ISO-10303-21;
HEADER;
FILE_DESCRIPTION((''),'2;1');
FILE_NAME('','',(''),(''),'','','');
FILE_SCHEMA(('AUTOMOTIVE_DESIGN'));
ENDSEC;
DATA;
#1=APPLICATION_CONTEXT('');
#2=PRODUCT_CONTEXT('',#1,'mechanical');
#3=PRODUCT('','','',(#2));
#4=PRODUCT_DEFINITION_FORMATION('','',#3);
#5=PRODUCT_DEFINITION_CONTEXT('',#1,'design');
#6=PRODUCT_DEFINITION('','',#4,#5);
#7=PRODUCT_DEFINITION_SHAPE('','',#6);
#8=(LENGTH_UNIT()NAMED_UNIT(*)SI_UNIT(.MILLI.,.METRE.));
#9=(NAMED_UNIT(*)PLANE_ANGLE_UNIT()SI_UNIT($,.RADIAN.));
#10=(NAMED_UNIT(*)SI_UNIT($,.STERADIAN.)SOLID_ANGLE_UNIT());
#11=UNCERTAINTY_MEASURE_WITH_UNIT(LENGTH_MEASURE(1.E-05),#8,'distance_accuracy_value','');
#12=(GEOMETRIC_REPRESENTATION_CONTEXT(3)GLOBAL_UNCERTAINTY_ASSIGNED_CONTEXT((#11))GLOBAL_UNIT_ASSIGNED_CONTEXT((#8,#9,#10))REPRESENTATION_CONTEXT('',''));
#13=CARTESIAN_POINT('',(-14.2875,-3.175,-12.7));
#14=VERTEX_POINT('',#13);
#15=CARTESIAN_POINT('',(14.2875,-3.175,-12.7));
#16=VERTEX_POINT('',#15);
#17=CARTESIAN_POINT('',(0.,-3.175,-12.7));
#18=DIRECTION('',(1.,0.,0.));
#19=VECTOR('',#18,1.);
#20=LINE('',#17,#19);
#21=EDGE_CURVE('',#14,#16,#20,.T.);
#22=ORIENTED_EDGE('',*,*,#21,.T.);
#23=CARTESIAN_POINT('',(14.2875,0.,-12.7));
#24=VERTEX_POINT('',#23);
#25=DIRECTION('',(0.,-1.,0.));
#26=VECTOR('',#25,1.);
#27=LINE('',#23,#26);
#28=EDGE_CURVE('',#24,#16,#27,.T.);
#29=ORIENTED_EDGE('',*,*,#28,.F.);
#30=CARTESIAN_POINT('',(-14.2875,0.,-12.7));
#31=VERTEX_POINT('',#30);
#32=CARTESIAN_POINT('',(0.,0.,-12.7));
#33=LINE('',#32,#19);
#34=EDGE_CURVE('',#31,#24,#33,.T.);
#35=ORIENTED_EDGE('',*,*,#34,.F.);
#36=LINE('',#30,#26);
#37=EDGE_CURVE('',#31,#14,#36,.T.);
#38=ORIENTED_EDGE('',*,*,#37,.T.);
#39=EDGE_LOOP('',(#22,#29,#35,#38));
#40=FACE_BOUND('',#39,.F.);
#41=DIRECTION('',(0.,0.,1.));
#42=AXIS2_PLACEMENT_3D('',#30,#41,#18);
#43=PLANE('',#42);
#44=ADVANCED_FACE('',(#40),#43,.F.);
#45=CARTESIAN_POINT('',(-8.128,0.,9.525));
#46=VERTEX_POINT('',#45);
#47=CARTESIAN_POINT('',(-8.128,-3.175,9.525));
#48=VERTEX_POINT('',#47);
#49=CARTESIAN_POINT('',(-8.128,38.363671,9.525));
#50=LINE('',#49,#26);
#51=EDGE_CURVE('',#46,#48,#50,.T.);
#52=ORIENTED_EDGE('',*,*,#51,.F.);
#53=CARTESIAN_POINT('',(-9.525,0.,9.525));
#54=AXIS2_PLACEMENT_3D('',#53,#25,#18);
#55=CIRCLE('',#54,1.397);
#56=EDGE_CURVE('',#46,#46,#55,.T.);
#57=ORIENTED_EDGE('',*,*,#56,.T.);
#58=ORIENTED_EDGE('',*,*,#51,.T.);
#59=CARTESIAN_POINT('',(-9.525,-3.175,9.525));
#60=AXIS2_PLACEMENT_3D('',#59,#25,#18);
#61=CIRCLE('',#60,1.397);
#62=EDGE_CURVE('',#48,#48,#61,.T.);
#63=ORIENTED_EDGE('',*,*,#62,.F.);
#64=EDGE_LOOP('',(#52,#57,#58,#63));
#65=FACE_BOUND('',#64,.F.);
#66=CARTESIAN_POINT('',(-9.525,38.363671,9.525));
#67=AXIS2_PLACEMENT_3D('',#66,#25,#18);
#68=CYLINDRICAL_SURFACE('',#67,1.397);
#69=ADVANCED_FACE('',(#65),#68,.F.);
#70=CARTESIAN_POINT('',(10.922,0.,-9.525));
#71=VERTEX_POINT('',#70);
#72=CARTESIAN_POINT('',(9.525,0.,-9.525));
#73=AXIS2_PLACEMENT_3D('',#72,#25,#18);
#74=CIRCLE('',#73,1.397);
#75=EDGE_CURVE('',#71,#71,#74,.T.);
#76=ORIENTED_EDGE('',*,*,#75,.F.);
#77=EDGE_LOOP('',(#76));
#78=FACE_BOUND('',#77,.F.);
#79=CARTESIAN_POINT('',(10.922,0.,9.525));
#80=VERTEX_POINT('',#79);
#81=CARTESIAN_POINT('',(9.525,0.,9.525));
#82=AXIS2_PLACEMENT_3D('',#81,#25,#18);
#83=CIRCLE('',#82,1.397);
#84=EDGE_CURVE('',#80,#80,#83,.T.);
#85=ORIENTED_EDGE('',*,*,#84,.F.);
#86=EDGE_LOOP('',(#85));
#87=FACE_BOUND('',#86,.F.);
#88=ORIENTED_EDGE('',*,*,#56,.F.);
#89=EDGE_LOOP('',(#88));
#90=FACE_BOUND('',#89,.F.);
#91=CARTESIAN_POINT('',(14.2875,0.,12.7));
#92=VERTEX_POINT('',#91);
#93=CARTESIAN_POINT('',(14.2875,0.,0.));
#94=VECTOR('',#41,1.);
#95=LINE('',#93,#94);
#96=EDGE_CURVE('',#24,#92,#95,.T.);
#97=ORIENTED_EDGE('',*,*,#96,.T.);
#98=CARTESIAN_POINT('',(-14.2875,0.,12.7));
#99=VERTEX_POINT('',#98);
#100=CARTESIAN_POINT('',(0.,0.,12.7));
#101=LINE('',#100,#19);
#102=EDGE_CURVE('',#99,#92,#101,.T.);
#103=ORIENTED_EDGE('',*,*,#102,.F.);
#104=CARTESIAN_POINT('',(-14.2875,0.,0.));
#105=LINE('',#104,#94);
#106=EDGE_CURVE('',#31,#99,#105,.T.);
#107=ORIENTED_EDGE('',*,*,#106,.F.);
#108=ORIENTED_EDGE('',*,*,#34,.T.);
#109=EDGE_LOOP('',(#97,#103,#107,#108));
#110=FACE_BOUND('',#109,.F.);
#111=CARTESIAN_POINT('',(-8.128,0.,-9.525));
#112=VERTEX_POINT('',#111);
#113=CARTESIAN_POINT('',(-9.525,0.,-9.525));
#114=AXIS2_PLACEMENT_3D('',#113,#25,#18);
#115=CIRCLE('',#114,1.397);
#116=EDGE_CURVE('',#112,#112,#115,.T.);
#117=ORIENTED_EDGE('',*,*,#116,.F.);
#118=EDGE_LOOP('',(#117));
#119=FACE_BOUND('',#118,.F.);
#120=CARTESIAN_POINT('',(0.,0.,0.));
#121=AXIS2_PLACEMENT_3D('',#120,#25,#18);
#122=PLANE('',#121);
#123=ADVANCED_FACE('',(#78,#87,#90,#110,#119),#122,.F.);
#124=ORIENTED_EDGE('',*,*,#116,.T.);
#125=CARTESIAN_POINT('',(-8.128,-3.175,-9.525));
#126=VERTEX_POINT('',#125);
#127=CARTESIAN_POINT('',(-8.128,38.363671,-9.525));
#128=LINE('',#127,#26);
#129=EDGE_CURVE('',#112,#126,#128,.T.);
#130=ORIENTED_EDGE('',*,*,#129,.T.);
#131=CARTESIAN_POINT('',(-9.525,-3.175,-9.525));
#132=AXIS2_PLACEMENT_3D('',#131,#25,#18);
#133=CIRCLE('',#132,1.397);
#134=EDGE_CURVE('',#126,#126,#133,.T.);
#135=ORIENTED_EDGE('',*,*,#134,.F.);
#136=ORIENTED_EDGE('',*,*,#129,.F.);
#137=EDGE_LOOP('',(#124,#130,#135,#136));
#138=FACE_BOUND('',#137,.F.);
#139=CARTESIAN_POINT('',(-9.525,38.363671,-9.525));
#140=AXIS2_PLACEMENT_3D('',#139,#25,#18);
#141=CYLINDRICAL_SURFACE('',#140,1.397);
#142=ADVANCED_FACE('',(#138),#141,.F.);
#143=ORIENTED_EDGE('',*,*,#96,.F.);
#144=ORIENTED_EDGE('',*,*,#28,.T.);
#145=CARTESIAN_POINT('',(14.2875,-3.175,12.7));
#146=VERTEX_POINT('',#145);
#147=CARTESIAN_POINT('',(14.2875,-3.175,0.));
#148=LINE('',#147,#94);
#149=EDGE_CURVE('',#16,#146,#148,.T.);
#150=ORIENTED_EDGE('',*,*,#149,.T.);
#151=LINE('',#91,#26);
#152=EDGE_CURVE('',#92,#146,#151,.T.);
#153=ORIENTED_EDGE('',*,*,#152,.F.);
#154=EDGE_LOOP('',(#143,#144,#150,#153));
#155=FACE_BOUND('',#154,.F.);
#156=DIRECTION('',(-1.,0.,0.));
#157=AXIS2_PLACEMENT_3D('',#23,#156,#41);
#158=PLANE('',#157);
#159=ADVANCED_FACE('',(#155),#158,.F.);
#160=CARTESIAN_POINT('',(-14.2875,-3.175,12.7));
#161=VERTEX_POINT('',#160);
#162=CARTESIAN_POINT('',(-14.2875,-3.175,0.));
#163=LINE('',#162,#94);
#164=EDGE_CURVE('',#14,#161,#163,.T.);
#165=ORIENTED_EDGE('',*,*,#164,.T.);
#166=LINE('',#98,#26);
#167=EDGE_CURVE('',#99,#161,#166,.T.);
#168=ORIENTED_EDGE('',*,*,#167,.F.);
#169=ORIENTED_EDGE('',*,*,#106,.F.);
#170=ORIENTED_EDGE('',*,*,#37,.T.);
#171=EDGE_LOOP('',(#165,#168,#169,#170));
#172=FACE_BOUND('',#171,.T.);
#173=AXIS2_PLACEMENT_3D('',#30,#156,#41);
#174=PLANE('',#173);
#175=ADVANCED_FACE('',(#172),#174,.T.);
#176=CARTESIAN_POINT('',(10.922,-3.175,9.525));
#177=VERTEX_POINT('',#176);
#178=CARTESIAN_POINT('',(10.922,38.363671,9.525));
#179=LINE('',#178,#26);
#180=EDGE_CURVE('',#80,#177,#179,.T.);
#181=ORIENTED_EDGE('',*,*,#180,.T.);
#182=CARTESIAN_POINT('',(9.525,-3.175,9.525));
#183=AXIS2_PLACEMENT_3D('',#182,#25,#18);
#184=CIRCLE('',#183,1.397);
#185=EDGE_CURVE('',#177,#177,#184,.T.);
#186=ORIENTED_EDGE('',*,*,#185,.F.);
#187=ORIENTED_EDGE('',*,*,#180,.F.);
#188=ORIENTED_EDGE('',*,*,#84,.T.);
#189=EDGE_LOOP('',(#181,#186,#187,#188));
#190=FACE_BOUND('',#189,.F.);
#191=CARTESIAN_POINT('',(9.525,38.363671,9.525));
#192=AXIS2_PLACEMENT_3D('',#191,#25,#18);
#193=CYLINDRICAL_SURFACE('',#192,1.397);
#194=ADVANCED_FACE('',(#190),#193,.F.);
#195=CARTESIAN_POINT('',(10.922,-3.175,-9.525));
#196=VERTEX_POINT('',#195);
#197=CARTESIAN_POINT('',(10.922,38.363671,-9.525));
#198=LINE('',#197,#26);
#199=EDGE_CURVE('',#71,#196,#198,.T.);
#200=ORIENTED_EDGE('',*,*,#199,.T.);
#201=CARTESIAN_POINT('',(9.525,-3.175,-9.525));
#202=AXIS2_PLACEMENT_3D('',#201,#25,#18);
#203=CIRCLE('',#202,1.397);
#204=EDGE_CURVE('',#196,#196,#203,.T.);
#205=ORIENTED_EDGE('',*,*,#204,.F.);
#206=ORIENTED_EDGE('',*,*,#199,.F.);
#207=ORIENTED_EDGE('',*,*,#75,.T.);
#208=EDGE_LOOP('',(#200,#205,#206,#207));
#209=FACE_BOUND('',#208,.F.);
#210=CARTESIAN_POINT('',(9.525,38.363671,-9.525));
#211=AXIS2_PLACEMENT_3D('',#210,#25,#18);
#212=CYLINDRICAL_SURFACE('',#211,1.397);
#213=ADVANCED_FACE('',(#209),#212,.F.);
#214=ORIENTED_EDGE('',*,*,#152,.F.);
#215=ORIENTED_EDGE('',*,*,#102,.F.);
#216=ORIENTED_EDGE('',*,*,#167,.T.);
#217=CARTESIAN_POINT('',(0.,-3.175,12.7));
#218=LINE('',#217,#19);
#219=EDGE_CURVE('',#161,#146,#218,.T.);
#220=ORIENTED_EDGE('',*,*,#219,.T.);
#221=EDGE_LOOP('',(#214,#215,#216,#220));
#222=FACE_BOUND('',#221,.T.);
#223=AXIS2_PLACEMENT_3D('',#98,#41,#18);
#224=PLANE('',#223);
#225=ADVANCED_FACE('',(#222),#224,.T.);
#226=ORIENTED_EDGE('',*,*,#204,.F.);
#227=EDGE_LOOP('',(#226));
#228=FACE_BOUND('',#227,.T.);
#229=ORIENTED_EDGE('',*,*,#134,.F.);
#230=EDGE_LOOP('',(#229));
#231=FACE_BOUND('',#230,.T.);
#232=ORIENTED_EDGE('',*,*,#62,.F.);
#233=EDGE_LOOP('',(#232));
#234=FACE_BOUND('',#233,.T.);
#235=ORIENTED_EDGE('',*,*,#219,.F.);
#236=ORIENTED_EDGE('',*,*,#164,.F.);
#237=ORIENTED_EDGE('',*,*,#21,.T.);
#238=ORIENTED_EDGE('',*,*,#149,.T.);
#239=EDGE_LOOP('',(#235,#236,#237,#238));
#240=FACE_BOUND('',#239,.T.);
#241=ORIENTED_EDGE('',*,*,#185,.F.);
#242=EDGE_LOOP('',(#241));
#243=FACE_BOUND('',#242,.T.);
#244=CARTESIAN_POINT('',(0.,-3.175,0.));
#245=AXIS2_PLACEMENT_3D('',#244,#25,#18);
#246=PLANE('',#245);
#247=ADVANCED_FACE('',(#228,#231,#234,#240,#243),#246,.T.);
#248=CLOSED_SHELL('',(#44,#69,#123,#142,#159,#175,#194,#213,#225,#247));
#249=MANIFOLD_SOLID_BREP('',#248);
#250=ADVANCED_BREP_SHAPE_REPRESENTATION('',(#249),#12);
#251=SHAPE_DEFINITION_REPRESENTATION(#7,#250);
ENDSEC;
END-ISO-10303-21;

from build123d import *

# Parameters (mm, degrees)
F0_W     = 28.575
F0_H     = 25.4
F1_DEPTH = 3.175
F3_D     = 2.794


# Not quite as in the source:
# - a length typed as a fraction of an inch, garbled in the dataset ("3 / 203.2 mm" for 3/8 in), is restored


with BuildPart() as f1:
    # F0 (on Front) → F1 (new body)
    with BuildSketch(Plane.XZ):
        Rectangle(F0_W, F0_H)
    extrude(amount=F1_DEPTH)

    # F3 (through all)
    with Locations(Plane(origin=(0, 0, 0), x_dir=(-1, 0, 0), z_dir=(0, 1, 0))):
        with Locations((9.525, -9.525), (-9.525, -9.525), (-9.525, 9.525), (9.525, 9.525)):
            Hole(F3_D / 2)


solid = f1.part
